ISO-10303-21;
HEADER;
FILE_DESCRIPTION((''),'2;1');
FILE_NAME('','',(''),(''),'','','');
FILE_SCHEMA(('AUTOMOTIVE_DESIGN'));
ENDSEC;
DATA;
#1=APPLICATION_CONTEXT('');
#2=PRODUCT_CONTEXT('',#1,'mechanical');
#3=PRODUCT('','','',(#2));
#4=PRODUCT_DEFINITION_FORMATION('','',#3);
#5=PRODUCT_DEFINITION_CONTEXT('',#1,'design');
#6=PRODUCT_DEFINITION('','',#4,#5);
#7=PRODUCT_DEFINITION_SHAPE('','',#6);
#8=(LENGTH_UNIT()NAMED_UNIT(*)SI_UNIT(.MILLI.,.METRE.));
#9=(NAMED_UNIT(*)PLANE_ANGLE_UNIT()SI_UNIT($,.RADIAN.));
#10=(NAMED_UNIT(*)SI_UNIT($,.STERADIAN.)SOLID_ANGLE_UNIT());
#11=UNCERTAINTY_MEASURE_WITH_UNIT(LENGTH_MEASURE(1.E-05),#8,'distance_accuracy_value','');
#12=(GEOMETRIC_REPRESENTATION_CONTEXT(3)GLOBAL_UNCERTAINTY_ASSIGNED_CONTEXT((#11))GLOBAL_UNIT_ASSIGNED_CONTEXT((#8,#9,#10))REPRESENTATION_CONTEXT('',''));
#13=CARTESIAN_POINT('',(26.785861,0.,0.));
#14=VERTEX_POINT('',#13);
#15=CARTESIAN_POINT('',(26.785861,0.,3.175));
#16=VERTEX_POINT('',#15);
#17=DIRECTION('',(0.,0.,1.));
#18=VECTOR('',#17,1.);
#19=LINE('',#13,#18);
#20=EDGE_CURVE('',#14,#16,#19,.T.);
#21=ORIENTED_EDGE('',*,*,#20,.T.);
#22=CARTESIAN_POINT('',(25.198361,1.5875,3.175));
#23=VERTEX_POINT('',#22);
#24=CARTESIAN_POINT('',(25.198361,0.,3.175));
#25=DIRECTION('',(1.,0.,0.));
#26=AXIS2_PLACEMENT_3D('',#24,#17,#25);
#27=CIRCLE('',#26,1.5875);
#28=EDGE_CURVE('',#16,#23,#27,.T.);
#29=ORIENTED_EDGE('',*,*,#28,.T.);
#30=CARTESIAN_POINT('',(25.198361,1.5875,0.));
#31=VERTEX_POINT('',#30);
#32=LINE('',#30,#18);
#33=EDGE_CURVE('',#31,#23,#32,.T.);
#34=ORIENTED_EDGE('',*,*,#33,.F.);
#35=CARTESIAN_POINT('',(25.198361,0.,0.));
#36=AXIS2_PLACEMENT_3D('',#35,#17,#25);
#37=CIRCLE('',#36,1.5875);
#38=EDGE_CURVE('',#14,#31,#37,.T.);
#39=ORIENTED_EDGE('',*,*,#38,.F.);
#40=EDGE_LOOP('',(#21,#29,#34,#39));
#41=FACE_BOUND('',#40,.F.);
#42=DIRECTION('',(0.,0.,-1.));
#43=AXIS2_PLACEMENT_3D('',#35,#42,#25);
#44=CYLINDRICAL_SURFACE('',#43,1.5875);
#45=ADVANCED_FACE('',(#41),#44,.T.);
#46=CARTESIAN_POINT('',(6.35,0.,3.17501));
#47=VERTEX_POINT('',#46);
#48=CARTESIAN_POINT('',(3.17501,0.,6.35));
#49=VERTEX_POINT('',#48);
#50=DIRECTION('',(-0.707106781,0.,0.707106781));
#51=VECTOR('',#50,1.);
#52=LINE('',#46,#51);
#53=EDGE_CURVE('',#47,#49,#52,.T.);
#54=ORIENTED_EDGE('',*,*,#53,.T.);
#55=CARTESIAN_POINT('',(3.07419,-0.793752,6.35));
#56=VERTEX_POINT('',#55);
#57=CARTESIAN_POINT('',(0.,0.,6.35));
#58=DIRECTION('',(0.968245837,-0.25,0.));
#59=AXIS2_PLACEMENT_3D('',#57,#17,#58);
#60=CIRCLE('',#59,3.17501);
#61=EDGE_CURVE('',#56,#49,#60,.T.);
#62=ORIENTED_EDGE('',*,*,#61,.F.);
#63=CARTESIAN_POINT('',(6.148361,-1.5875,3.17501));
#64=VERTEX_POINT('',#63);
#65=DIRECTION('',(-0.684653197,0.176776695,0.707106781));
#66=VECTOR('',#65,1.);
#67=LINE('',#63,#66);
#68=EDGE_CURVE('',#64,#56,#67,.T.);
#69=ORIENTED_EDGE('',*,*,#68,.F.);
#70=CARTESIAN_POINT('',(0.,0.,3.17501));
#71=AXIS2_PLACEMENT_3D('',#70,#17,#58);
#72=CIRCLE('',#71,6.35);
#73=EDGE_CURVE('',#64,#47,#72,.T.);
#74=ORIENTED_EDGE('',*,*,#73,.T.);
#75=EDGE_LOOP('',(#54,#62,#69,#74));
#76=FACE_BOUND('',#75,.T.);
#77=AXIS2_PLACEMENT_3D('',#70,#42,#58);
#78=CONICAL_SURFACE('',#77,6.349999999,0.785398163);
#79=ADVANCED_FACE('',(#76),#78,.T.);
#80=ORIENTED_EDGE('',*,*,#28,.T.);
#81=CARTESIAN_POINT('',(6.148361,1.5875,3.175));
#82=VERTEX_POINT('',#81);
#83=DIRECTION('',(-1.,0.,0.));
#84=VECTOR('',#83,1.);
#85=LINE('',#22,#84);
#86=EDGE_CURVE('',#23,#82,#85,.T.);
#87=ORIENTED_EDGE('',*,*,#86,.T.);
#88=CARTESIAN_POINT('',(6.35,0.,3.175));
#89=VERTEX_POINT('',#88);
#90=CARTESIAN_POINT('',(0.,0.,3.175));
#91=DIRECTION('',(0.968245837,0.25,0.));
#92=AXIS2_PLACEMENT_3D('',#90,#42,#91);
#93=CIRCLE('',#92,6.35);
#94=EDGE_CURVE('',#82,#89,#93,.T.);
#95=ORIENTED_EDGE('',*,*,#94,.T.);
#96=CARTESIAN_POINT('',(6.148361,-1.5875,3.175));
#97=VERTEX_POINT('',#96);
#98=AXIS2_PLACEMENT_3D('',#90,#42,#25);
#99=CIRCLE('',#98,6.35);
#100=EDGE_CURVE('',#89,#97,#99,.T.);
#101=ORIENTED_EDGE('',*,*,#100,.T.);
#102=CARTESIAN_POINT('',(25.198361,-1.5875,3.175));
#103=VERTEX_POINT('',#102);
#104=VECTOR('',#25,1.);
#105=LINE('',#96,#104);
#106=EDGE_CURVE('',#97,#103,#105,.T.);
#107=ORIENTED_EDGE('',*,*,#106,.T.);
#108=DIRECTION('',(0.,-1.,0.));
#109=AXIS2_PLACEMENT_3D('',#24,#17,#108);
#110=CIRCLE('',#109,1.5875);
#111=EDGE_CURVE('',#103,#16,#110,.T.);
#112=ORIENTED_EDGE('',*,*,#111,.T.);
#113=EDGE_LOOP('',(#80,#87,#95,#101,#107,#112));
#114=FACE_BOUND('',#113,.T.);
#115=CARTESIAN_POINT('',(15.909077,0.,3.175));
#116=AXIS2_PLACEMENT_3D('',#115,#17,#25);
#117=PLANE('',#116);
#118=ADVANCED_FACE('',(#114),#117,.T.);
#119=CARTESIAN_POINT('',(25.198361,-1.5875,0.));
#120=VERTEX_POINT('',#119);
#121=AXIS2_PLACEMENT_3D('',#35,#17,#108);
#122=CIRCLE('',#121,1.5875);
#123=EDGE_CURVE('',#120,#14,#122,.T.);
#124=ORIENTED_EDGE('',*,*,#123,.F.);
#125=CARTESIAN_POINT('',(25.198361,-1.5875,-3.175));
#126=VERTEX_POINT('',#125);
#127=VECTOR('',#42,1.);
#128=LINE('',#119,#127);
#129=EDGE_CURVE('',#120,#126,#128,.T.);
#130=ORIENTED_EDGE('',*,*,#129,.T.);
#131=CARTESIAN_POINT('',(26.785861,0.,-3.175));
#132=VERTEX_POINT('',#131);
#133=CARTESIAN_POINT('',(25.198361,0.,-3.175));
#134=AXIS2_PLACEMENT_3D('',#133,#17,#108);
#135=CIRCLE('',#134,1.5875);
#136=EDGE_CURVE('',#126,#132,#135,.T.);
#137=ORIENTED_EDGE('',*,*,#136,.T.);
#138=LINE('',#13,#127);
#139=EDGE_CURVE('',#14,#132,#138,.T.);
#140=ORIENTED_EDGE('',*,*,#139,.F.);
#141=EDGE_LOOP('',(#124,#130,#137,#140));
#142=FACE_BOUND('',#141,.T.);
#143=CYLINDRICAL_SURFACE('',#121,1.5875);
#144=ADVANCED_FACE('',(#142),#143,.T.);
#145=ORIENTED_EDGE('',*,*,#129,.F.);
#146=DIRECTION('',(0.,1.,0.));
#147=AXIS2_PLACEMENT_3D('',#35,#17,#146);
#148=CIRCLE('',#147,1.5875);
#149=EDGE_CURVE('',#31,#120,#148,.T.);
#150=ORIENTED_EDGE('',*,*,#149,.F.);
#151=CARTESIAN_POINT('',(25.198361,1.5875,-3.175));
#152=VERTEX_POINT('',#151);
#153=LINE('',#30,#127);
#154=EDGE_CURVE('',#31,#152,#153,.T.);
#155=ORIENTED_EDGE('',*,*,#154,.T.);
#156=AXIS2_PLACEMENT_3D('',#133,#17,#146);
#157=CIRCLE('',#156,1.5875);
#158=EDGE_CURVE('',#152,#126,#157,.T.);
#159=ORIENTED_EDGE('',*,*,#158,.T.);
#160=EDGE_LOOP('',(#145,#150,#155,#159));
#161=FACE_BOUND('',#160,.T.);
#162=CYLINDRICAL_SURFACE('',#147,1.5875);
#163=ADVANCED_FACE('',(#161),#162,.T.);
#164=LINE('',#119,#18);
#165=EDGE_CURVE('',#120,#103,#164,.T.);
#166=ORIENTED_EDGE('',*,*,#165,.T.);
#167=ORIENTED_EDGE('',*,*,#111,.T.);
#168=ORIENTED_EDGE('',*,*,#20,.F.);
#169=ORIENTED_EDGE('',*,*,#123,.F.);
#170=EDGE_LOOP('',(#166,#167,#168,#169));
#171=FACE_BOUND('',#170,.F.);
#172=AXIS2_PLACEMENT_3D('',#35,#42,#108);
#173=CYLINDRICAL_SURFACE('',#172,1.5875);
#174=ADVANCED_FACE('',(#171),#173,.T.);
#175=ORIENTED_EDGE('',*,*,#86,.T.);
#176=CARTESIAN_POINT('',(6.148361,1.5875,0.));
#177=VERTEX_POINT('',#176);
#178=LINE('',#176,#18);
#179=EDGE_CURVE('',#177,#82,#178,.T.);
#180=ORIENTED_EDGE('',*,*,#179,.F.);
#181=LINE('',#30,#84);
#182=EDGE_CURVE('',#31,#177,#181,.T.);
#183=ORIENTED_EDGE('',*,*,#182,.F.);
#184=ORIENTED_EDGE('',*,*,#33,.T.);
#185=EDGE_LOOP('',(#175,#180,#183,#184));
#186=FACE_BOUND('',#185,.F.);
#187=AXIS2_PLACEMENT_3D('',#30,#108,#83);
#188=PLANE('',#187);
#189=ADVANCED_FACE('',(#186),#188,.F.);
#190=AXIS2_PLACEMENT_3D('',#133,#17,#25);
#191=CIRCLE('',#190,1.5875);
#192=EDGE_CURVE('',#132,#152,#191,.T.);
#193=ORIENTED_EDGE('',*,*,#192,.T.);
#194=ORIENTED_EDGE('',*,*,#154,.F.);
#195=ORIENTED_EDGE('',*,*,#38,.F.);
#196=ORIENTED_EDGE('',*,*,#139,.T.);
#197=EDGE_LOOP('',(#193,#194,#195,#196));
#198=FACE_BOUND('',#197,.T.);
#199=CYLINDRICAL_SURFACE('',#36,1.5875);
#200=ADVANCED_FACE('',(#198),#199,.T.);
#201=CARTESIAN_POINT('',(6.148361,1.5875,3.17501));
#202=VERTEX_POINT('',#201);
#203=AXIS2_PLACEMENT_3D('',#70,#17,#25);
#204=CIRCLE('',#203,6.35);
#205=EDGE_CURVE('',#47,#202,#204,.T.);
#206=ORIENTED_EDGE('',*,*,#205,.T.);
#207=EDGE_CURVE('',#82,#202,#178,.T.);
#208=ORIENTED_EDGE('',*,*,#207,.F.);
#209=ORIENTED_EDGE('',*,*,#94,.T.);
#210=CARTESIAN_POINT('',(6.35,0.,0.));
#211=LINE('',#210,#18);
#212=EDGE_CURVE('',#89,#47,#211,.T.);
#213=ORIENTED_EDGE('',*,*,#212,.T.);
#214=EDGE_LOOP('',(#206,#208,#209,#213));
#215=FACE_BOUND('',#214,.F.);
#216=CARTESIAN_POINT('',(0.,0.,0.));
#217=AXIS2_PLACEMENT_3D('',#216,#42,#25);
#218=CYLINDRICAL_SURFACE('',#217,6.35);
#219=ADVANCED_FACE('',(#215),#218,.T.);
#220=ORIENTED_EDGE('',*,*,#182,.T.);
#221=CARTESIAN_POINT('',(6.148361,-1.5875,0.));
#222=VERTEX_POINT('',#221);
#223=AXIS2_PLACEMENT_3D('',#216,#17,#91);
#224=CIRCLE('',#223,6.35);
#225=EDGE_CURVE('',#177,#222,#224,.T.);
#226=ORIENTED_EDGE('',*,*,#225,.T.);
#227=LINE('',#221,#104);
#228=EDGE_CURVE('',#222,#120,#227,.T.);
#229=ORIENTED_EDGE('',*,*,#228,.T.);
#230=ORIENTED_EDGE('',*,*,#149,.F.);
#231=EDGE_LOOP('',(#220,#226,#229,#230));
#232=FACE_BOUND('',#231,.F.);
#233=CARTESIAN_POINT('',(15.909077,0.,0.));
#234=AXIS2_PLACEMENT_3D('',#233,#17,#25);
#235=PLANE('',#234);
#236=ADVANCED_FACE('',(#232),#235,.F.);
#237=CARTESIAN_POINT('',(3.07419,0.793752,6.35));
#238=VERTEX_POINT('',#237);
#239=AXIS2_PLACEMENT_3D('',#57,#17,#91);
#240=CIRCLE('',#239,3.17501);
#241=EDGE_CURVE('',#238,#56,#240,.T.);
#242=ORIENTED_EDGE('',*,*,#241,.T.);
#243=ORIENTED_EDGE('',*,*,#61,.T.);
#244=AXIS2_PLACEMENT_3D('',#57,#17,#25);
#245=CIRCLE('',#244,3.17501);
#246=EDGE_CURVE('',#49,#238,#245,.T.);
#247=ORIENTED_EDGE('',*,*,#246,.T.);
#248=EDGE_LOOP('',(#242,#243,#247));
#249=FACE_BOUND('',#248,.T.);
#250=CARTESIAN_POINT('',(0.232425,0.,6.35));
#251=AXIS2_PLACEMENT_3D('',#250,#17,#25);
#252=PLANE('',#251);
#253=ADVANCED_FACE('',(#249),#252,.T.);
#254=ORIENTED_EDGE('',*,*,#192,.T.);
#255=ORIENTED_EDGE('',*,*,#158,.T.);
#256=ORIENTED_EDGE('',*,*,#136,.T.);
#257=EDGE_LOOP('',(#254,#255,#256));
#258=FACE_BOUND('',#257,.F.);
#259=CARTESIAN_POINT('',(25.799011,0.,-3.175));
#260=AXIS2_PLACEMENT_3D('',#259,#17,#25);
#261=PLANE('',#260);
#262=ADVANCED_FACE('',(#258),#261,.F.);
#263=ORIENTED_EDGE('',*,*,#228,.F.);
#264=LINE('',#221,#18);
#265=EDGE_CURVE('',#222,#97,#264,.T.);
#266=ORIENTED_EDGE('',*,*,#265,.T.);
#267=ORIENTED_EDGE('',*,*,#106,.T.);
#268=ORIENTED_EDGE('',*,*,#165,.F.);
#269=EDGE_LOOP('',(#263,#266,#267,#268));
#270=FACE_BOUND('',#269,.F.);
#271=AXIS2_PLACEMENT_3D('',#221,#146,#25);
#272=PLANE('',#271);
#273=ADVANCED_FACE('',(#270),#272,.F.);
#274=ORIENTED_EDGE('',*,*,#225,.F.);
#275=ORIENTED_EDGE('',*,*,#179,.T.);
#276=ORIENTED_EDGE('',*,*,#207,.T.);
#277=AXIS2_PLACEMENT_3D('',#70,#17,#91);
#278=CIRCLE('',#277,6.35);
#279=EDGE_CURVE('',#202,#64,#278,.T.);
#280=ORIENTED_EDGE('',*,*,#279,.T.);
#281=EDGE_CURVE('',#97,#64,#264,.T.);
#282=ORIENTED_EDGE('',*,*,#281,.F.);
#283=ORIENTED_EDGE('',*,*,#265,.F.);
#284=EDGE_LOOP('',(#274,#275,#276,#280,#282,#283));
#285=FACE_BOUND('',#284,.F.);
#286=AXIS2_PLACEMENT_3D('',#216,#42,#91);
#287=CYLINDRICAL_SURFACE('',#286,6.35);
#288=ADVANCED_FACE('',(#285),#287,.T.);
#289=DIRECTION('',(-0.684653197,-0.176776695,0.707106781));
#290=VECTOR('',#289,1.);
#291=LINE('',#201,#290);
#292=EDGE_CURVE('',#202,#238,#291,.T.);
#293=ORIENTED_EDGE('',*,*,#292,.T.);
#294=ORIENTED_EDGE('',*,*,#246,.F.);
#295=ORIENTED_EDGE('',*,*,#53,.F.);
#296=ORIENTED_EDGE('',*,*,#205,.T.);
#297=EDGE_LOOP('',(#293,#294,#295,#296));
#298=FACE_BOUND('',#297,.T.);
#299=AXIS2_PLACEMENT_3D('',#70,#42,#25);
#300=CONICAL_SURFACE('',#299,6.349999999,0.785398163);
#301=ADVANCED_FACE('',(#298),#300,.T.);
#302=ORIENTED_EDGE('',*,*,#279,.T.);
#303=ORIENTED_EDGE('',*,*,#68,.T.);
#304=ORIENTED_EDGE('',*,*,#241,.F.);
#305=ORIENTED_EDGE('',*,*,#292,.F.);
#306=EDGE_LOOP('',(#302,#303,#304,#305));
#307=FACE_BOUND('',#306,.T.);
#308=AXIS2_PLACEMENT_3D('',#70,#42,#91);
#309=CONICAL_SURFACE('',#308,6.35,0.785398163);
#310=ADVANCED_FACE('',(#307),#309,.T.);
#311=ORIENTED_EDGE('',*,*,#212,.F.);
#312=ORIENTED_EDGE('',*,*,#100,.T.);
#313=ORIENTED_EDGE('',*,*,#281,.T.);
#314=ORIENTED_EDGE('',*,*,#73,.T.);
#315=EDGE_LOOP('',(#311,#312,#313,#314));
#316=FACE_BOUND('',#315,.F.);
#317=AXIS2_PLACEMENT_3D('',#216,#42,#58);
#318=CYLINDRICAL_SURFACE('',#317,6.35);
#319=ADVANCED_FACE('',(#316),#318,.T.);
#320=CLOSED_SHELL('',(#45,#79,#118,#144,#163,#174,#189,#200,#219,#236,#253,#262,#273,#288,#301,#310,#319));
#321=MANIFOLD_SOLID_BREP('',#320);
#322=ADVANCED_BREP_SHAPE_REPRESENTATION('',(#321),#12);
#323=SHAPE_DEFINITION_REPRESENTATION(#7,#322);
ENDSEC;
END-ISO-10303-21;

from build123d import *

# Parameters (mm, degrees)
F1_DEPTH = 6.35
F2_DEPTH = 3.175
F3_SIZE  = 3.17499
F4_DEPTH = 3.175


# Not quite as in the source:
# - a fillet or chamfer is up to 0.001 mm smaller than in the source, because OpenCascade refuses the exact size


with BuildPart() as f1:
    # F0 (on Top) → F1 (new body)
    with BuildSketch(Plane.XY):
        with BuildLine():
            Line((6.1483610621, 0), (6.1483610621, 1.5875))
            ThreePointArc((6.1483610621, 1.5875), (-6.35, 0), (6.1483610621, -1.5875))
            Line((6.1483610621, -1.5875), (6.1483610621, 0))
        make_face()
        with BuildLine():
            ThreePointArc((6.1483610621, -1.5875), (6.2993885713, -0.8001272573), (6.35, 0))
            ThreePointArc((6.35, 0), (6.2993885713, 0.8001272573), (6.1483610621, 1.5875))
            Line((6.1483610621, 1.5875), (6.1483610621, 0))
            Line((6.1483610621, 0), (6.1483610621, -1.5875))
        make_face()
    extrude(amount=F1_DEPTH)

    # F0 (on Top) → F2 (join)
    with BuildSketch(Plane.XY):
        with BuildLine():
            ThreePointArc((6.1483610621, 1.5875), (6.2993885713, 0.8001272573), (6.35, 0))
            ThreePointArc((6.35, 0), (6.2993885713, -0.8001272573), (6.1483610621, -1.5875))
            Line((6.1483610621, -1.5875), (25.1983610621, -1.5875))
            ThreePointArc((25.1983610621, -1.5875), (23.6108610621, 0), (25.1983610621, 1.5875))
            Line((25.1983610621, 1.5875), (6.1483610621, 1.5875))
        make_face()
        with BuildLine():
            ThreePointArc((26.7858610621, 0), (26.3208930772, 1.1225320151), (25.1983610621, 1.5875))
            Line((25.1983610621, 1.5875), (25.1983610621, -1.5875))
            ThreePointArc((25.1983610621, -1.5875), (26.3208930772, -1.1225320151), (26.7858610621, 0))
        make_face()
        with BuildLine():
            Line((25.1983610621, -1.5875), (25.1983610621, 1.5875))
            ThreePointArc((25.1983610621, 1.5875), (23.6108610621, 0), (25.1983610621, -1.5875))
        make_face()
    extrude(amount=F2_DEPTH)

    # F3 (size 3.175 in the source; OpenCascade refuses exactly that, so slightly less here)
    f3_edges = [f1.edges().sort_by_distance(p)[0] for p in [
        (-6.148361, 1.5875, 6.35),
    ]]
    chamfer(f3_edges, length=F3_SIZE)

    # F0 (on Top) → F4 (join)
    with BuildSketch(Plane.XY):
        with BuildLine():
            ThreePointArc((26.7858610621, 0), (26.3208930772, 1.1225320151), (25.1983610621, 1.5875))
            Line((25.1983610621, 1.5875), (25.1983610621, -1.5875))
            ThreePointArc((25.1983610621, -1.5875), (26.3208930772, -1.1225320151), (26.7858610621, 0))
        make_face()
        with BuildLine():
            Line((25.1983610621, -1.5875), (25.1983610621, 1.5875))
            ThreePointArc((25.1983610621, 1.5875), (23.6108610621, 0), (25.1983610621, -1.5875))
        make_face()
    extrude(amount=-F4_DEPTH)


solid = f1.part
